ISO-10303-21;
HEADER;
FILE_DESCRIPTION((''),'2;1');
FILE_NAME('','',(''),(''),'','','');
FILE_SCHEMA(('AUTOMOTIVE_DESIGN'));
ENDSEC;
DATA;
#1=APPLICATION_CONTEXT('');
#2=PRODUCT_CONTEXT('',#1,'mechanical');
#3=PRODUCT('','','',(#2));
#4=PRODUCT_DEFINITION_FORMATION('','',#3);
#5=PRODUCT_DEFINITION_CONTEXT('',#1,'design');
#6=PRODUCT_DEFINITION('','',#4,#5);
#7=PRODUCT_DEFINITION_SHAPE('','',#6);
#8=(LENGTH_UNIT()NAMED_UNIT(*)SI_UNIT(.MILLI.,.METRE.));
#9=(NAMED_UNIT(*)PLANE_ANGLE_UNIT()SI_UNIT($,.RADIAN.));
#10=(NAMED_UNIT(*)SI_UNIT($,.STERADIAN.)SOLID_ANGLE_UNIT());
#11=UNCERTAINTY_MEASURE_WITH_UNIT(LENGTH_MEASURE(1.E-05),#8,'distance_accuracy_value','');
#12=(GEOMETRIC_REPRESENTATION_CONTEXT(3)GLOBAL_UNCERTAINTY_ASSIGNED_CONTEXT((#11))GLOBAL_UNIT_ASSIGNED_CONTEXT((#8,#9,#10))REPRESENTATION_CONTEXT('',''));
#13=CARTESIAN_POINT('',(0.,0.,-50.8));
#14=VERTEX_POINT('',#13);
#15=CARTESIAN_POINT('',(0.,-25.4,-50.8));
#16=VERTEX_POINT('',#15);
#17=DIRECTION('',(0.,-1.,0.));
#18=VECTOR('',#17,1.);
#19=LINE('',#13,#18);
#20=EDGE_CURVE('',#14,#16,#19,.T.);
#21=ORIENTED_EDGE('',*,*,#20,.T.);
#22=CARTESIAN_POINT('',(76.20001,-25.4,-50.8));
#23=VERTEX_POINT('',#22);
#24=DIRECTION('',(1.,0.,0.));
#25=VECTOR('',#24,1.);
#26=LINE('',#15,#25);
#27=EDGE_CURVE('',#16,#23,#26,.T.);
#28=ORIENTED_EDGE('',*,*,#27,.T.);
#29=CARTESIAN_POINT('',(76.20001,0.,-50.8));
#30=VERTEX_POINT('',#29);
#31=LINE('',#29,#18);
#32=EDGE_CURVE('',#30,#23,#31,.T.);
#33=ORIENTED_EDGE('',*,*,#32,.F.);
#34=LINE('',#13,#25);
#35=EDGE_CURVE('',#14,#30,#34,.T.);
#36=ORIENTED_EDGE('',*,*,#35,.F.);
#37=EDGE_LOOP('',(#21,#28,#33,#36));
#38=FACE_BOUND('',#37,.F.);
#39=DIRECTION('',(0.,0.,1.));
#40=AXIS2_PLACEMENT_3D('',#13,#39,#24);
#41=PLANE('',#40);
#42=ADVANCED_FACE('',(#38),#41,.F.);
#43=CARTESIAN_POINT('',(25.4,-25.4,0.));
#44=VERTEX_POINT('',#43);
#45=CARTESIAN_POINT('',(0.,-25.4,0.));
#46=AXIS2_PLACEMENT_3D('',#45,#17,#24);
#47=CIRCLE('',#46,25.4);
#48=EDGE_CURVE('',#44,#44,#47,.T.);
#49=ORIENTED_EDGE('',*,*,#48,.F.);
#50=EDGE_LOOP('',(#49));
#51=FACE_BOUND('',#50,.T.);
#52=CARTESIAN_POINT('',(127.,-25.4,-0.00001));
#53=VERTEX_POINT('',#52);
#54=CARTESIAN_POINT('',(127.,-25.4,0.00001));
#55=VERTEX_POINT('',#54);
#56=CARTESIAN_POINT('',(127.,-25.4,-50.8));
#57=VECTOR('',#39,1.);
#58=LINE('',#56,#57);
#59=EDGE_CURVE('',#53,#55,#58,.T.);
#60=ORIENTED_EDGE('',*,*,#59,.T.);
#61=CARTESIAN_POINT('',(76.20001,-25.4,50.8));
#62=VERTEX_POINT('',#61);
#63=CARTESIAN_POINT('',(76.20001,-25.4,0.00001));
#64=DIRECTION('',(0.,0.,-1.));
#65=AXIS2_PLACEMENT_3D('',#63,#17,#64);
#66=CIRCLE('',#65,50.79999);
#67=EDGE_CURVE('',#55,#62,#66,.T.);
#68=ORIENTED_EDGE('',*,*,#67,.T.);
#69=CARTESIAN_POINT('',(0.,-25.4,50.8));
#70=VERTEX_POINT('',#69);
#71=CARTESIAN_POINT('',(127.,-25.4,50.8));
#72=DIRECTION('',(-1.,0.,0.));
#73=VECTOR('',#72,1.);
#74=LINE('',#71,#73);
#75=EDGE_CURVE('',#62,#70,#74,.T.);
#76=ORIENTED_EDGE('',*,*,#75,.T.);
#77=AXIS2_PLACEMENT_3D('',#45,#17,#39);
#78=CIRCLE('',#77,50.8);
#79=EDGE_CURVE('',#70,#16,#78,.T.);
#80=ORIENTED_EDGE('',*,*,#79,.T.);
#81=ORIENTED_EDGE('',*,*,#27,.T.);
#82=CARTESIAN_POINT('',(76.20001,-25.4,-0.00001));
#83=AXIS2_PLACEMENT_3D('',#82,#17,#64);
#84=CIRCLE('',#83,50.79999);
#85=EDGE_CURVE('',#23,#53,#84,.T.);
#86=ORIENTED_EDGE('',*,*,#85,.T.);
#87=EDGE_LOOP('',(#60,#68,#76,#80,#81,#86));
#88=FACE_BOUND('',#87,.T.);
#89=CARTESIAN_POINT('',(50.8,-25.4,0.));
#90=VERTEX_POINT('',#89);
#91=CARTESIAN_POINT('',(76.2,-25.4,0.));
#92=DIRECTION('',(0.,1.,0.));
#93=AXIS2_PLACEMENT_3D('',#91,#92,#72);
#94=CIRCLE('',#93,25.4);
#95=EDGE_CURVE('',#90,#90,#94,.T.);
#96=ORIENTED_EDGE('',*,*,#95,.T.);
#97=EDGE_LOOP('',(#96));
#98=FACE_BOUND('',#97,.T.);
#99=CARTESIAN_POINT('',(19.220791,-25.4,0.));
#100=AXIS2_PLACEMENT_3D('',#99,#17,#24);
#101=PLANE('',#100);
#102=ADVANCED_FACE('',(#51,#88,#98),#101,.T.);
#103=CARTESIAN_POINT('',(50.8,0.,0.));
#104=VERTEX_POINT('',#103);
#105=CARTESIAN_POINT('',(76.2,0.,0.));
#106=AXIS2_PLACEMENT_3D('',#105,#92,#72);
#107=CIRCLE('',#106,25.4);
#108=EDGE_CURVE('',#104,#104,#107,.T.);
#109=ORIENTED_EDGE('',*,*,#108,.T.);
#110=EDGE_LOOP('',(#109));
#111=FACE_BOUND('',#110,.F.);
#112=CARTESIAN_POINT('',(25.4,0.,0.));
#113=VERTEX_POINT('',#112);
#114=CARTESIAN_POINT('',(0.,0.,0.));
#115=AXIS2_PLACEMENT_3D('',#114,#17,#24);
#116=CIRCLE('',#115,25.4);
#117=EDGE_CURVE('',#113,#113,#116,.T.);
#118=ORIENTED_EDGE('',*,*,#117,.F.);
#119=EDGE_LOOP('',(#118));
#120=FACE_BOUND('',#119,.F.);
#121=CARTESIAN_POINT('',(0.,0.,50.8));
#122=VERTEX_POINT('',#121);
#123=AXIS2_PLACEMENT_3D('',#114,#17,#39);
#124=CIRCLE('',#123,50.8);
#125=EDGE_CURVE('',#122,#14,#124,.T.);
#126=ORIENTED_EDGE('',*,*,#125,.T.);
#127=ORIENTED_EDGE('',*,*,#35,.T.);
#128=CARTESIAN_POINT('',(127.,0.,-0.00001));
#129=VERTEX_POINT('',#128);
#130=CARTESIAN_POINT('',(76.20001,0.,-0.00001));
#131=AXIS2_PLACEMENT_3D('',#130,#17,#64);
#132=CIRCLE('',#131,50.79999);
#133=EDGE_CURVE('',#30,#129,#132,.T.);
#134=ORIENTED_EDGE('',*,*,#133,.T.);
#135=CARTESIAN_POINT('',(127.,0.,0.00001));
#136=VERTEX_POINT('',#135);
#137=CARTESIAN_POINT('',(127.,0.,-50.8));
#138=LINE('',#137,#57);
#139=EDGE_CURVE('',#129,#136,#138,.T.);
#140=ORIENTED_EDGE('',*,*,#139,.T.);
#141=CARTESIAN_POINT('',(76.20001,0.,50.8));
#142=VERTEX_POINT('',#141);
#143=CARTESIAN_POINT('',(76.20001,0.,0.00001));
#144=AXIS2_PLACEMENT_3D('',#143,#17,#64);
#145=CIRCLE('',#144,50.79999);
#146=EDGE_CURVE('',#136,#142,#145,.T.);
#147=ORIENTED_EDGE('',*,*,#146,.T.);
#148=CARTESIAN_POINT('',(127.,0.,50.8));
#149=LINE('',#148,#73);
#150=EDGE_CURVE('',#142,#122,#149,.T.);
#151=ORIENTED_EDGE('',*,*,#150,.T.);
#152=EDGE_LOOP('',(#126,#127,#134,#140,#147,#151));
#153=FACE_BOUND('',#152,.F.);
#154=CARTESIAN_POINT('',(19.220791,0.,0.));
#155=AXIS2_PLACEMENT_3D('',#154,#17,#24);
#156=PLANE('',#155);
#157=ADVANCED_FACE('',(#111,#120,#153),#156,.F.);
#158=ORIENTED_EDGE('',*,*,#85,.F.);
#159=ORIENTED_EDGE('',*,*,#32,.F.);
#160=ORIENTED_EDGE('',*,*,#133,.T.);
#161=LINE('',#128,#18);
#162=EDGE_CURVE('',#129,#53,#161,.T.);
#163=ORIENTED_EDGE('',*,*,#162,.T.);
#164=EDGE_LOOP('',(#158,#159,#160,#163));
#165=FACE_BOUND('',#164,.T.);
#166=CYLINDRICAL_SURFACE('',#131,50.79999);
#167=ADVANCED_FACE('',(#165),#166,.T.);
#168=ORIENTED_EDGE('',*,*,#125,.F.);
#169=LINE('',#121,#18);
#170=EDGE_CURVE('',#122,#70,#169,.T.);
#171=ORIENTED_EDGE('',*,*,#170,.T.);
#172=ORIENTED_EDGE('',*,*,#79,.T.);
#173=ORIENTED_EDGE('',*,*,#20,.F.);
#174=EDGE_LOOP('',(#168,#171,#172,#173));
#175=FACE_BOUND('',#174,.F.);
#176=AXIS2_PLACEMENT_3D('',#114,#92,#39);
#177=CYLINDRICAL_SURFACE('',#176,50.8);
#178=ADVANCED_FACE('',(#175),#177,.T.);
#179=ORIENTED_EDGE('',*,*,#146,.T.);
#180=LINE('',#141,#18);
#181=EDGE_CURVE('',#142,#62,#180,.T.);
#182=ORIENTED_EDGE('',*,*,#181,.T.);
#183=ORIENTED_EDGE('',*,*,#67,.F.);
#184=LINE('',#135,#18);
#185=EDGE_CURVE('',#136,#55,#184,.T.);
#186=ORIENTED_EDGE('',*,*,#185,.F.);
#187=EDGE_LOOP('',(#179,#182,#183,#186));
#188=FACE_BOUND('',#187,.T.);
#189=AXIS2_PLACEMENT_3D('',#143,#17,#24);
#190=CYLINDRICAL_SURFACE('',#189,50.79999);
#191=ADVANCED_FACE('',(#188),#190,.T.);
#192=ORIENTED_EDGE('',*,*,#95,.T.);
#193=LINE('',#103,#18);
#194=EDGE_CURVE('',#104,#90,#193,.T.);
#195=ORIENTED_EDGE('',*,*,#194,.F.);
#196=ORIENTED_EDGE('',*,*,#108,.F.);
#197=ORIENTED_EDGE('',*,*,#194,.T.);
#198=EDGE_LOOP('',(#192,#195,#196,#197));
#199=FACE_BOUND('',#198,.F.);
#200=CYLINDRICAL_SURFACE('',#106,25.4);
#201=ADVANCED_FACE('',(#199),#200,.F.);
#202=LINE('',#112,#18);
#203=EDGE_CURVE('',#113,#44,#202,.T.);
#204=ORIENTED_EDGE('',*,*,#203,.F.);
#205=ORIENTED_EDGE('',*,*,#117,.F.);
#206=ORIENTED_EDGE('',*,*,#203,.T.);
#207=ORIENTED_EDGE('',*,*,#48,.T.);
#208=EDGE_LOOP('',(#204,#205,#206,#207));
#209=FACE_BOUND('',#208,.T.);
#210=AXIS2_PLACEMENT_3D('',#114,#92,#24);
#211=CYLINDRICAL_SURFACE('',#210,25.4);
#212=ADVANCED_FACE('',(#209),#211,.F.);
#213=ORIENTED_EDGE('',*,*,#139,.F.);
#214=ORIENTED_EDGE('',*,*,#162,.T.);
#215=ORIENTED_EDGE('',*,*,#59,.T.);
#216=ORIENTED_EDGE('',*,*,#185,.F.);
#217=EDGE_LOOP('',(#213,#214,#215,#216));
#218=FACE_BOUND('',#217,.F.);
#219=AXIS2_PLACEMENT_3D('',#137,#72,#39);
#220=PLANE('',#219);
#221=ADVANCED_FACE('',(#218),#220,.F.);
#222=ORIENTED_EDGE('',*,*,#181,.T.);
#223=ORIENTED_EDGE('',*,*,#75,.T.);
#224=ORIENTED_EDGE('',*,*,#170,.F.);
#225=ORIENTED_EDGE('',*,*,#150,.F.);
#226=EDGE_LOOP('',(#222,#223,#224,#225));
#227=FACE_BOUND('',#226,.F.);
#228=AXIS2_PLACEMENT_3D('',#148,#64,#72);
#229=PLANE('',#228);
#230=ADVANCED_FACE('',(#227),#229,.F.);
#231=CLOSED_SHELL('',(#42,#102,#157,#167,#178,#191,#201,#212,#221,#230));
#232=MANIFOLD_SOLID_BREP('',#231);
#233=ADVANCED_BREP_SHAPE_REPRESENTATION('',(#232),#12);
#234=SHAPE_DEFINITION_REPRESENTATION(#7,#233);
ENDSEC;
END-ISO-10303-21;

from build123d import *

# Parameters (mm, degrees)
F1_DEPTH = 25.4
F2_R     = 50.79999
F3_R     = 25.4
F4_DEPTH = 25.4


# Not quite as in the source:
# - a fillet or chamfer is up to 0.001 mm smaller than in the source, because OpenCascade refuses the exact size


with BuildPart() as f1:
    # F0 (on Front) → F1 (new body)
    with BuildSketch(Plane.XZ):
        with BuildLine():
            ThreePointArc((0, -50.8), (35.9210244843, -35.9210244843), (50.8, 0))
            ThreePointArc((50.8, 0), (35.9210244843, 35.9210244843), (0, 50.8))
            Line((0, 50.8), (0, -50.8))
        make_face()
        with BuildLine():
            ThreePointArc((0, 50.8), (35.9210244843, 35.9210244843), (50.8, 0))
            ThreePointArc((50.8, 0), (35.9210244843, -35.9210244843), (0, -50.8))
            Line((0, -50.8), (127, -50.8))
            Line((127, -50.8), (127, 50.8))
            Line((127, 50.8), (0, 50.8))
        make_face()
        with BuildLine():
            Line((0, -50.8), (0, 50.8))
            ThreePointArc((0, 50.8), (-50.8, 0), (0, -50.8))
        make_face()
    extrude(amount=F1_DEPTH)

    # F2 (radius 50.8 in the source; OpenCascade refuses exactly that, so slightly less here)
    f2_edges = [f1.edges().sort_by_distance(p)[0] for p in [
        (127, -12.7, 50.8),
        (127, -12.7, -50.8),
    ]]
    fillet(f2_edges, radius=F2_R)

    # F3 (on Front) → F4 (cut)
    with BuildSketch(Plane.XZ):
        Circle(F3_R)
    f4 = extrude(amount=F4_DEPTH, mode=Mode.SUBTRACT)

    # F6: F4 across plane
    add(f4.mirror(Plane.YZ.offset(38.1)), mode=Mode.SUBTRACT)


solid = f1.part
